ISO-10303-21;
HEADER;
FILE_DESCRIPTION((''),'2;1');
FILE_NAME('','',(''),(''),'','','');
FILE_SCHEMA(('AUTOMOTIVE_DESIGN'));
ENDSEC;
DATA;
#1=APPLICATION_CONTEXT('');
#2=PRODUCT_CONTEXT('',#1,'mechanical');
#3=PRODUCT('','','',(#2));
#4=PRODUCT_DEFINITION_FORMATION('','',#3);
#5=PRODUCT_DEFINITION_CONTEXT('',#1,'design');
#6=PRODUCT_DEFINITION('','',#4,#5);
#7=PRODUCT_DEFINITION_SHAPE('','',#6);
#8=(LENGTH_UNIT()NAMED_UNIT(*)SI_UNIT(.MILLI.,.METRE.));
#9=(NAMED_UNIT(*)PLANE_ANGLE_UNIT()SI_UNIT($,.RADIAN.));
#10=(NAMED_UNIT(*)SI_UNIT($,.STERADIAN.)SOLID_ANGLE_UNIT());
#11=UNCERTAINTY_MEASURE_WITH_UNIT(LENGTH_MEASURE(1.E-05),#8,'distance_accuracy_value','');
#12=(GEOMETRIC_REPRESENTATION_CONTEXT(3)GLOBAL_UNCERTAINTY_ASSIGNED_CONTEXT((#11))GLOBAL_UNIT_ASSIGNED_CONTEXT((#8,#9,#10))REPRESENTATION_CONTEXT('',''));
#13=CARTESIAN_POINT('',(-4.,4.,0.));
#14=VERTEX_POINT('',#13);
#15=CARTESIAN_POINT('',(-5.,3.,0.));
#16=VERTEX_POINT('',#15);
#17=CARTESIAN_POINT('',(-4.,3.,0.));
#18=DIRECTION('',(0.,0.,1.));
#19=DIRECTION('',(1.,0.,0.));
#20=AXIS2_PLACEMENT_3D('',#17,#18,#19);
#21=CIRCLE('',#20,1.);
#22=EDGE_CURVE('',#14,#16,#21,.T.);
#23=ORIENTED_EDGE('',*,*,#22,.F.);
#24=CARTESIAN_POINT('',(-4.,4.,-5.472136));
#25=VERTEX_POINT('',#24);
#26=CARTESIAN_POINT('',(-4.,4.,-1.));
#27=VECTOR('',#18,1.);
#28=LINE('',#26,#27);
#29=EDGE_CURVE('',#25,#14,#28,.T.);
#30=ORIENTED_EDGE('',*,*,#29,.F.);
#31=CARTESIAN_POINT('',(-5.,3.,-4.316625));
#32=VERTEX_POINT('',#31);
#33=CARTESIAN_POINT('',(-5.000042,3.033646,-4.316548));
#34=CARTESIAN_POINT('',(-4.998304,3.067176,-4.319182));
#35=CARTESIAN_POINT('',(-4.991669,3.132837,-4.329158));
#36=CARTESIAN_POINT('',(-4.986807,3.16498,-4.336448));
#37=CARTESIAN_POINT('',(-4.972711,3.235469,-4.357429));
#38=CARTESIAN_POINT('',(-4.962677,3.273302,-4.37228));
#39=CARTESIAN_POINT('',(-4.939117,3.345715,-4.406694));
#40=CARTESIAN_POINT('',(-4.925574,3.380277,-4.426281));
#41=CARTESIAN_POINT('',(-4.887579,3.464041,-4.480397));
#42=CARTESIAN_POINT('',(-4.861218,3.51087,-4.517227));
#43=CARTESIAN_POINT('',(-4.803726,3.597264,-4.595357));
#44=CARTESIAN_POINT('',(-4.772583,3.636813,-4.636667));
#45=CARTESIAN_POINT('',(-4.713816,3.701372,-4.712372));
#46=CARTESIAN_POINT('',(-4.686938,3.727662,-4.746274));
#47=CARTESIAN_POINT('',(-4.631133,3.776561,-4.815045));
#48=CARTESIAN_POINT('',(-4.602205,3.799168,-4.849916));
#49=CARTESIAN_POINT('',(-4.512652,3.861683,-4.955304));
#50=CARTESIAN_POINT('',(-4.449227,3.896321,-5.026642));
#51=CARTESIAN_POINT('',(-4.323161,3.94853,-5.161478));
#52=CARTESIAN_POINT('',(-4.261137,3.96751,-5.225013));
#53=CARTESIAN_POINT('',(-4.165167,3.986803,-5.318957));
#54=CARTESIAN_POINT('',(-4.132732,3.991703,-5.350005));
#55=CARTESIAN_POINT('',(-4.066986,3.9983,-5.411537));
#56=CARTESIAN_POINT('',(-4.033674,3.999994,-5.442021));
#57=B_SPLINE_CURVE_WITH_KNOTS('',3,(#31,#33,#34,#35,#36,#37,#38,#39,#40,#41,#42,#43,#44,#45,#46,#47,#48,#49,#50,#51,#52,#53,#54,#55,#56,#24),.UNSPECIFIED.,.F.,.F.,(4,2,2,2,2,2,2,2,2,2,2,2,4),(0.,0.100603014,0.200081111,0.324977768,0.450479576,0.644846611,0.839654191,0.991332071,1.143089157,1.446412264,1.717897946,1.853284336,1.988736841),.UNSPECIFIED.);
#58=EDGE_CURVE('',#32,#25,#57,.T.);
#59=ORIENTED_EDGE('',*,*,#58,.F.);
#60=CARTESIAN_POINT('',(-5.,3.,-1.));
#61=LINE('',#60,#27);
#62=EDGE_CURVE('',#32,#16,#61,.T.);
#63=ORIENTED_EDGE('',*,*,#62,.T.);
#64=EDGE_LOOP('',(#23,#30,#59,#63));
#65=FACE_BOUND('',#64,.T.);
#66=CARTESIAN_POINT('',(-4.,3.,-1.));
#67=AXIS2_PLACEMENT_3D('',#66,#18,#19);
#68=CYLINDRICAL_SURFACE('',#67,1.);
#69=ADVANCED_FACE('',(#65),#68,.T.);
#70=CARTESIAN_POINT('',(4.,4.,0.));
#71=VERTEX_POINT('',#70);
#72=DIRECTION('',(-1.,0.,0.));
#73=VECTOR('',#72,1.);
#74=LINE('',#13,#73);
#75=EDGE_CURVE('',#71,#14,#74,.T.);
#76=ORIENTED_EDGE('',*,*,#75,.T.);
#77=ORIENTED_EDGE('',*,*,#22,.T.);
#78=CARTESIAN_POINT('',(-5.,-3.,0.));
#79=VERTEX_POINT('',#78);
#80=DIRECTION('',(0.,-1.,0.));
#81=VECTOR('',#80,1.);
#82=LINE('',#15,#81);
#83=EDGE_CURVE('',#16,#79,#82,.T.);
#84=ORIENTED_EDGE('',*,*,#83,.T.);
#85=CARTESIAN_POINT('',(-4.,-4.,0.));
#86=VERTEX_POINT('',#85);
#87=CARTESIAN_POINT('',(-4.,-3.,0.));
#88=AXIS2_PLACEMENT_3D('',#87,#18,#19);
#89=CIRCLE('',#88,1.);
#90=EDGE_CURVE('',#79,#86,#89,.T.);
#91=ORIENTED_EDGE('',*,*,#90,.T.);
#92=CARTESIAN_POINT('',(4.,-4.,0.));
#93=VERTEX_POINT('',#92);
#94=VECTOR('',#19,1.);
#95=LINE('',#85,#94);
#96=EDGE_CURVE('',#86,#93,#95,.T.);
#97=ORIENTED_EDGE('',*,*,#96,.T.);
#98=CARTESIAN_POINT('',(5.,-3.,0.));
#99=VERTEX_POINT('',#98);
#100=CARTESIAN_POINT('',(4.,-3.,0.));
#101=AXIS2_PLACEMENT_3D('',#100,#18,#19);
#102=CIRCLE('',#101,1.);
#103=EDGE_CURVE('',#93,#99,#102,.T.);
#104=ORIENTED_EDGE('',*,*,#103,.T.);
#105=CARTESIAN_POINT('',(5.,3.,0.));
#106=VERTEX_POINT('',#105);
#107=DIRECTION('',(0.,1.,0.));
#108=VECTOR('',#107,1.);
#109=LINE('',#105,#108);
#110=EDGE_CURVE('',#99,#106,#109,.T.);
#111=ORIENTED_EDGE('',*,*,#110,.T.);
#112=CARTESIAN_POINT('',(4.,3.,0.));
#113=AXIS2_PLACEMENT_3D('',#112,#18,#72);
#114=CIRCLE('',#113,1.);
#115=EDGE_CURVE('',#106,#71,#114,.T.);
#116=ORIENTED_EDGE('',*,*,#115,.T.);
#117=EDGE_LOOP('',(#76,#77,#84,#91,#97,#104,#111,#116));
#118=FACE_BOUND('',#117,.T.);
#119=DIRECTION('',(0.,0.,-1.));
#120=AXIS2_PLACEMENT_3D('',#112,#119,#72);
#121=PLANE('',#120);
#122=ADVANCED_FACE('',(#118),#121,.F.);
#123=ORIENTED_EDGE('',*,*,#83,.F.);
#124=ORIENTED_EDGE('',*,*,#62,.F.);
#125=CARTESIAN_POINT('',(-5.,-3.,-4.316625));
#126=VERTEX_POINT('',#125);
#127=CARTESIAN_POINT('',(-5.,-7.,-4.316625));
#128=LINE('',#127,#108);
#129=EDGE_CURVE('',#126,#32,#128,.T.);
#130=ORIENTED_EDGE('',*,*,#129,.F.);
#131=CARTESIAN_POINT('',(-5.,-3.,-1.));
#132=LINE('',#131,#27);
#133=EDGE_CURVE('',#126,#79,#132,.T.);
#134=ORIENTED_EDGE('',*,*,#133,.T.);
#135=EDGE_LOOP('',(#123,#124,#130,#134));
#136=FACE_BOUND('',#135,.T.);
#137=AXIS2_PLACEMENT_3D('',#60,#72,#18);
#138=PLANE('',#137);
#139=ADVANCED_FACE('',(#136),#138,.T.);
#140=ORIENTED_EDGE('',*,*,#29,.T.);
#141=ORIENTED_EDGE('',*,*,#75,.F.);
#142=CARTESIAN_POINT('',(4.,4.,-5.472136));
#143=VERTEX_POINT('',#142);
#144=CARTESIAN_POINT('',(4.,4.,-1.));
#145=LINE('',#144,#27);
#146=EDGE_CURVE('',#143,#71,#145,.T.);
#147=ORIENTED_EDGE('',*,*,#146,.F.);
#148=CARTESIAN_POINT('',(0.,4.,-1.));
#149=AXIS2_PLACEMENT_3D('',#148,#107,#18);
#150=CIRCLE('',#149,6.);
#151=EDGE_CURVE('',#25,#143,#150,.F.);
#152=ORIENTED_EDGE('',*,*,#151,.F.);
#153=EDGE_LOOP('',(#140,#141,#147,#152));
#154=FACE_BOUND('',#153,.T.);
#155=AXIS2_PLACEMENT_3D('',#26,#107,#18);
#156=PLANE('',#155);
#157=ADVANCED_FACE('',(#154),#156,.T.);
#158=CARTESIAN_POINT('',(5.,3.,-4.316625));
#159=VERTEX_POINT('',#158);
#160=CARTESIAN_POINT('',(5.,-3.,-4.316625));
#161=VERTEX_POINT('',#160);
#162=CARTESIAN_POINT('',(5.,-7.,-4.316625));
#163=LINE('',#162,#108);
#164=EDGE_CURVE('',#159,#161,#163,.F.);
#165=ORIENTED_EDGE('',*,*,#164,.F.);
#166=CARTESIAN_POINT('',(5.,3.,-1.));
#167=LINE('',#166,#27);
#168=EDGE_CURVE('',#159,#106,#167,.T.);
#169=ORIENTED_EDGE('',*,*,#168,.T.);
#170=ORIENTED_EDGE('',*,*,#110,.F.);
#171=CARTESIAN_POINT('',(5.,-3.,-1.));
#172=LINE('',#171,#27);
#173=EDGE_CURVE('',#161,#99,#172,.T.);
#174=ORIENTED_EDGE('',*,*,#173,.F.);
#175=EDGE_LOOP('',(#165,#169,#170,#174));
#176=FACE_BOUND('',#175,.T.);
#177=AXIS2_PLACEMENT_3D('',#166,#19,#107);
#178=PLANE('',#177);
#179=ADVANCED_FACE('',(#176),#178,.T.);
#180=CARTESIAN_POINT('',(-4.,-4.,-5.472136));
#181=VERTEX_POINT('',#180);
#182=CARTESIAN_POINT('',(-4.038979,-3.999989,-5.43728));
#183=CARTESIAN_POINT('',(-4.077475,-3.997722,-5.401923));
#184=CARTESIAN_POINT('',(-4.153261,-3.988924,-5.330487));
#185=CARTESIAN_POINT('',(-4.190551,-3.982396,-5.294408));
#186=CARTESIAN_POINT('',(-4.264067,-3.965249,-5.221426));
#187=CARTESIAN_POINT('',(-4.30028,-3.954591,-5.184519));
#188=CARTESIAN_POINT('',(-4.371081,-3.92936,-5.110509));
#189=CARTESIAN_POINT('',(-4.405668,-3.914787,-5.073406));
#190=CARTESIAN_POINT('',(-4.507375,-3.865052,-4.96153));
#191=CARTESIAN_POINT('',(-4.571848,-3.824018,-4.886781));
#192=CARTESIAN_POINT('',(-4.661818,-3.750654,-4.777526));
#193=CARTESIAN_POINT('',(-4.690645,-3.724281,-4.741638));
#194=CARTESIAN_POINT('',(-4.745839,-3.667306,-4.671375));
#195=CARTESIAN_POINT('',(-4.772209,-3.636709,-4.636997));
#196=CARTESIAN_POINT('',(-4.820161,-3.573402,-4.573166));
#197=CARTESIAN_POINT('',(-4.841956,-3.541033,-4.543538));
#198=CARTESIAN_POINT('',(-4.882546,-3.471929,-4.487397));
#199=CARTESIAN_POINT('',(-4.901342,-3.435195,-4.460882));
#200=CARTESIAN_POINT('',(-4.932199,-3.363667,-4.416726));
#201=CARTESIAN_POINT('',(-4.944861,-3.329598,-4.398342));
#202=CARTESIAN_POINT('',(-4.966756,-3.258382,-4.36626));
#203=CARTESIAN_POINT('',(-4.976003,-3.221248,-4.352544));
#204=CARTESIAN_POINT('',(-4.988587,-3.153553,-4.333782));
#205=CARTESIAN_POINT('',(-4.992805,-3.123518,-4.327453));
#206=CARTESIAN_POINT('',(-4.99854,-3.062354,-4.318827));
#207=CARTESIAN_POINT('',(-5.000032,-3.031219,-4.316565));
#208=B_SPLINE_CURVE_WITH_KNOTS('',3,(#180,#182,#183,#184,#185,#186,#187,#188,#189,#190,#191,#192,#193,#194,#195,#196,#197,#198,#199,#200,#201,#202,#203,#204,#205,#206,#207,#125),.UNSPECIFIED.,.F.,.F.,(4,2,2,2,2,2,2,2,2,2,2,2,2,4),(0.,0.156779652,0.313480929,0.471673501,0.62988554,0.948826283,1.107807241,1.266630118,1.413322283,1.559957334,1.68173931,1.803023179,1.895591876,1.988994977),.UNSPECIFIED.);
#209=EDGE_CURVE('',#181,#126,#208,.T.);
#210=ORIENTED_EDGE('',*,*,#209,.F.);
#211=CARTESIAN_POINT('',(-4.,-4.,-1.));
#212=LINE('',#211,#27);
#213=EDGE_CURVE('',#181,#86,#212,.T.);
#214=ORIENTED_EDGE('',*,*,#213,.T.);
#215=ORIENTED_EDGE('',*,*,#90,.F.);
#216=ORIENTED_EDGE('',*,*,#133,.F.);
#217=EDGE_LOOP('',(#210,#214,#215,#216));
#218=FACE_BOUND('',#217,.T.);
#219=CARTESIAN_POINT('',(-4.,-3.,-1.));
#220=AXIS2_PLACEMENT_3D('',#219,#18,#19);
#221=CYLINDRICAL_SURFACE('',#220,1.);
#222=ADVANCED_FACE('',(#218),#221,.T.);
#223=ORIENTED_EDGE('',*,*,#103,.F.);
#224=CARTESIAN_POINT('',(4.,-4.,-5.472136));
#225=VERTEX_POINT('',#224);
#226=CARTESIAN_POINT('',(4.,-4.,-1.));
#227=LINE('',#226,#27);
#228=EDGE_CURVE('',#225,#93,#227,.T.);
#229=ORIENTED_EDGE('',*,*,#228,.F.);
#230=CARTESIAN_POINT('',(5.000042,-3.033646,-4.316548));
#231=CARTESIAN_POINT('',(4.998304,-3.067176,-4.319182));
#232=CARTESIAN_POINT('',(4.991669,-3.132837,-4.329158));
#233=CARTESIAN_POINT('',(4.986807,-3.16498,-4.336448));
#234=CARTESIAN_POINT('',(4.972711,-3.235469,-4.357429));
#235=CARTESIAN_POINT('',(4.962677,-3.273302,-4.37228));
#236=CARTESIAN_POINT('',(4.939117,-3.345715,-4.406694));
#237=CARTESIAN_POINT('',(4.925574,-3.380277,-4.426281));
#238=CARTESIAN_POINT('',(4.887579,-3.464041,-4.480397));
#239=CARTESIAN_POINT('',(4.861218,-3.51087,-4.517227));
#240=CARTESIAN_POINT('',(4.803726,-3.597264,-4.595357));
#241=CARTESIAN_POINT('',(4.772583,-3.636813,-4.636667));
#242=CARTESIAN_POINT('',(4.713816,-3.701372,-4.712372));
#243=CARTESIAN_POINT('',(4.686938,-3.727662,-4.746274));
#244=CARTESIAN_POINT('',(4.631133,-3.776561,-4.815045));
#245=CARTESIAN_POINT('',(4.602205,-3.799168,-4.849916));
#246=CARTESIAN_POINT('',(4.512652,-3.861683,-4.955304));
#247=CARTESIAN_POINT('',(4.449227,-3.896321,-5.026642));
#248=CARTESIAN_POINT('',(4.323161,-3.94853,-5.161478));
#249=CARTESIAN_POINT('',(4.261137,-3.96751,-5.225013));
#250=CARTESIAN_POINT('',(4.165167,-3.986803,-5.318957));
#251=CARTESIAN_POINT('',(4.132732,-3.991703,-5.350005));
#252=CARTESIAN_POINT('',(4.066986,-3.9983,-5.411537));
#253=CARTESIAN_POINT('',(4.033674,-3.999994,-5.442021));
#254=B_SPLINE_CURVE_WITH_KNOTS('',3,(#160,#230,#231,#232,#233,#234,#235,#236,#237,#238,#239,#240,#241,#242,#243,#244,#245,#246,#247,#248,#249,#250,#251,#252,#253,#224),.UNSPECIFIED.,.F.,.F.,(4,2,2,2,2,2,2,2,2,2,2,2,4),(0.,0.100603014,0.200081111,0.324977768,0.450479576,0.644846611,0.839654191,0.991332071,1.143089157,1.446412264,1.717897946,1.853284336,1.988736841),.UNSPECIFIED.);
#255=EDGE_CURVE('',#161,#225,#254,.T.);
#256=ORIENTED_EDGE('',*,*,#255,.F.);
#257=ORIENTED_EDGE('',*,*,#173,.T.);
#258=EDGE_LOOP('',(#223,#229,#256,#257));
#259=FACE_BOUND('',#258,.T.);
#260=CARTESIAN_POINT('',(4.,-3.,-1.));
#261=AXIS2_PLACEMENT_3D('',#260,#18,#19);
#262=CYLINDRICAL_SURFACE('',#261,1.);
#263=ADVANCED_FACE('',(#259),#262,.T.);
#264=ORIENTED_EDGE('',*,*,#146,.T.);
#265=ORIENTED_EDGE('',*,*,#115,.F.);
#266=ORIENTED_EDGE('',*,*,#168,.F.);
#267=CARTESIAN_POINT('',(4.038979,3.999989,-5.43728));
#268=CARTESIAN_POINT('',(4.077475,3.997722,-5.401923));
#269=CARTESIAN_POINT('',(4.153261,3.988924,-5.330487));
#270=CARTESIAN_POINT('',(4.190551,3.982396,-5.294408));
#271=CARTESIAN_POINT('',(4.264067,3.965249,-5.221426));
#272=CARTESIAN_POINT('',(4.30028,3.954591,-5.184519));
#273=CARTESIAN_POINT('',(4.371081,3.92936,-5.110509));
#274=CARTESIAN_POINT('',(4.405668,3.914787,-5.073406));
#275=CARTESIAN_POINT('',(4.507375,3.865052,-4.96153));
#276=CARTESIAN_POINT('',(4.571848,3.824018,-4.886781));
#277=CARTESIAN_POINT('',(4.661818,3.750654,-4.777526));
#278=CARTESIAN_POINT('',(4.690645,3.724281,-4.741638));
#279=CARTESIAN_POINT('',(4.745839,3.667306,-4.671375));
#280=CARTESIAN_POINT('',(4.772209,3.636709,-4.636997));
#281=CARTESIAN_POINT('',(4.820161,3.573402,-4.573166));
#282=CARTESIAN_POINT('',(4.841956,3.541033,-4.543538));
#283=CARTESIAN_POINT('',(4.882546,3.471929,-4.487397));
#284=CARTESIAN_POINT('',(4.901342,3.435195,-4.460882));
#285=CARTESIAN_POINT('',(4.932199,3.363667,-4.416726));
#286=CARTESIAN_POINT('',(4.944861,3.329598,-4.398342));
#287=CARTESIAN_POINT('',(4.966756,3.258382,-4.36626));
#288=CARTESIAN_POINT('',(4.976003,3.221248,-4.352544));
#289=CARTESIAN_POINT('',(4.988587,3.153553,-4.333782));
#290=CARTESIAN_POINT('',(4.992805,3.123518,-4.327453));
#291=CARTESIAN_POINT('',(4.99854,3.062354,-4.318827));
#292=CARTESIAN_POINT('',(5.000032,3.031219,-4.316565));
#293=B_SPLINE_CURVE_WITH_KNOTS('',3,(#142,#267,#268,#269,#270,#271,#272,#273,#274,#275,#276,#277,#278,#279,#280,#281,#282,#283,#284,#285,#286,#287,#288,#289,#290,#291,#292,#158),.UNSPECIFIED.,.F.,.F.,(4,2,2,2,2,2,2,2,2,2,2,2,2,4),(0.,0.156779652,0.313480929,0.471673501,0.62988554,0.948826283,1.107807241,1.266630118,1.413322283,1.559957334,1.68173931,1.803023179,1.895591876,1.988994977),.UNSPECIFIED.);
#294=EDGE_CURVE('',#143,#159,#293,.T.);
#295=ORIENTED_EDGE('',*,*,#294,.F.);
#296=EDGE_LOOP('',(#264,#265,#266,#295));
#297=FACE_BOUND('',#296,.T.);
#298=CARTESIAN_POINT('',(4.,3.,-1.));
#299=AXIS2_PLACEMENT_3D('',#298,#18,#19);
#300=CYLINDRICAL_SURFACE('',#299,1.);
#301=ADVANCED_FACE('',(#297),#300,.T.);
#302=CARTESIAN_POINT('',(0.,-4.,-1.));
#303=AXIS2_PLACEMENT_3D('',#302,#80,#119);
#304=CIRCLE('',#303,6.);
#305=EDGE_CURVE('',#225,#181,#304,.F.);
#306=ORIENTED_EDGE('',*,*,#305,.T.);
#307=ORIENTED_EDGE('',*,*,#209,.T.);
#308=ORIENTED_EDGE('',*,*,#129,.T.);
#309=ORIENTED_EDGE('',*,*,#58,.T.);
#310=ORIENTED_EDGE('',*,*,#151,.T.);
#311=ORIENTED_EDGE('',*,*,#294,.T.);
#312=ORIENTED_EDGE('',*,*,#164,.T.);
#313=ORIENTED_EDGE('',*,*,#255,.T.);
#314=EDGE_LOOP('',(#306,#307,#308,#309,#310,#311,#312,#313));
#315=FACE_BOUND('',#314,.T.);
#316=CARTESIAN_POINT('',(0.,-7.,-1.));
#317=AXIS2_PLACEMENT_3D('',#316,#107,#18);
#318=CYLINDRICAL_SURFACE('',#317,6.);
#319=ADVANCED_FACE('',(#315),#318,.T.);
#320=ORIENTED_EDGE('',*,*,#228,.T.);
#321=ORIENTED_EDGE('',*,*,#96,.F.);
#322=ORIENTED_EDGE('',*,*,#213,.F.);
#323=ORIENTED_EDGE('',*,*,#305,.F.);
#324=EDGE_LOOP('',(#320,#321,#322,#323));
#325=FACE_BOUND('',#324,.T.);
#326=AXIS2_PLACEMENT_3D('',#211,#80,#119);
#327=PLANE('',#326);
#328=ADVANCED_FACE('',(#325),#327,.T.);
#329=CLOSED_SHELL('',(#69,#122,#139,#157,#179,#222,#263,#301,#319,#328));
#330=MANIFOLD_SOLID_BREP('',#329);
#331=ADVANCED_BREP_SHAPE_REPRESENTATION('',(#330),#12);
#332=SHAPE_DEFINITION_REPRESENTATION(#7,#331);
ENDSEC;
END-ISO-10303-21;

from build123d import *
from build123d.topology import SkipClean

# Parameters (mm, degrees)
SALIENTE_EXTRUIR1_DEPTH = 1
SALIENTE_EXTRUIR2_DEPTH = 7
CROQUIS4_W              = 21.763285414
CROQUIS4_H              = 20.505608116
CORTAR_EXTRUIR1_DEPTH   = 14


with BuildPart() as part:
    # Croquis1 → Saliente-Extruir1 (new body)
    with BuildSketch(Plane.XY):
        with BuildLine():
            Line((-4, 4), (4, 4))
            ThreePointArc((4, 4), (4.707106781, 3.707106781), (5, 3))
            Line((5, 3), (5, -3))
            ThreePointArc((5, -3), (4.707106781, -3.707106781), (4, -4))
            Line((4, -4), (-4, -4))
            ThreePointArc((-4, -4), (-4.707106781, -3.707106781), (-5, -3))
            Line((-5, -3), (-5, 3))
            ThreePointArc((-5, 3), (-4.707106781, 3.707106781), (-4, 4))
        make_face()
    extrude(amount=-SALIENTE_EXTRUIR1_DEPTH)

    # Croquis2 → Saliente-Extruir2 (add, symmetric)
    with BuildSketch(Plane(origin=(0, 0, 0), x_dir=(1, 0, 0), z_dir=(0, 1, 0))):
        with BuildLine():
            Line((0, 1), (-6, 1))
            ThreePointArc((-6, 1), (-4.242640667, 5.242640684), (0, 7))
            ThreePointArc((0, 7), (4.242640687, 5.242640687), (6, 1))
            Line((6, 1), (0, 1))
        make_face()
    extrude(amount=SALIENTE_EXTRUIR2_DEPTH, both=True)

    # Croquis4 → Cortar-Extruir1 (cut)
    with SkipClean():  # the faces are left unmerged after this step: merging them gives an invalid solid
        with BuildSketch(Plane.XY):
            with Locations((0.374231366, -0.207273628)):
                Rectangle(CROQUIS4_W, CROQUIS4_H)
            with BuildLine():
                Line((5, -3), (5, 3))
                ThreePointArc((5, 3), (4.707106781, 3.707106781), (4, 4))
                Line((4, 4), (-4, 4))
                ThreePointArc((-4, 4), (-4.707106781, 3.707106781), (-5, 3))
                Line((-5, 3), (-5, -3))
                ThreePointArc((-5, -3), (-4.707106781, -3.707106781), (-4, -4))
                Line((-4, -4), (4, -4))
                ThreePointArc((4, -4), (4.707106781, -3.707106781), (5, -3))
            make_face(mode=Mode.SUBTRACT)
        extrude(amount=-CORTAR_EXTRUIR1_DEPTH, mode=Mode.SUBTRACT)
    add(part.part.scale(1), mode=Mode.REPLACE)  # the faces are merged on a copy


solid = part.part
